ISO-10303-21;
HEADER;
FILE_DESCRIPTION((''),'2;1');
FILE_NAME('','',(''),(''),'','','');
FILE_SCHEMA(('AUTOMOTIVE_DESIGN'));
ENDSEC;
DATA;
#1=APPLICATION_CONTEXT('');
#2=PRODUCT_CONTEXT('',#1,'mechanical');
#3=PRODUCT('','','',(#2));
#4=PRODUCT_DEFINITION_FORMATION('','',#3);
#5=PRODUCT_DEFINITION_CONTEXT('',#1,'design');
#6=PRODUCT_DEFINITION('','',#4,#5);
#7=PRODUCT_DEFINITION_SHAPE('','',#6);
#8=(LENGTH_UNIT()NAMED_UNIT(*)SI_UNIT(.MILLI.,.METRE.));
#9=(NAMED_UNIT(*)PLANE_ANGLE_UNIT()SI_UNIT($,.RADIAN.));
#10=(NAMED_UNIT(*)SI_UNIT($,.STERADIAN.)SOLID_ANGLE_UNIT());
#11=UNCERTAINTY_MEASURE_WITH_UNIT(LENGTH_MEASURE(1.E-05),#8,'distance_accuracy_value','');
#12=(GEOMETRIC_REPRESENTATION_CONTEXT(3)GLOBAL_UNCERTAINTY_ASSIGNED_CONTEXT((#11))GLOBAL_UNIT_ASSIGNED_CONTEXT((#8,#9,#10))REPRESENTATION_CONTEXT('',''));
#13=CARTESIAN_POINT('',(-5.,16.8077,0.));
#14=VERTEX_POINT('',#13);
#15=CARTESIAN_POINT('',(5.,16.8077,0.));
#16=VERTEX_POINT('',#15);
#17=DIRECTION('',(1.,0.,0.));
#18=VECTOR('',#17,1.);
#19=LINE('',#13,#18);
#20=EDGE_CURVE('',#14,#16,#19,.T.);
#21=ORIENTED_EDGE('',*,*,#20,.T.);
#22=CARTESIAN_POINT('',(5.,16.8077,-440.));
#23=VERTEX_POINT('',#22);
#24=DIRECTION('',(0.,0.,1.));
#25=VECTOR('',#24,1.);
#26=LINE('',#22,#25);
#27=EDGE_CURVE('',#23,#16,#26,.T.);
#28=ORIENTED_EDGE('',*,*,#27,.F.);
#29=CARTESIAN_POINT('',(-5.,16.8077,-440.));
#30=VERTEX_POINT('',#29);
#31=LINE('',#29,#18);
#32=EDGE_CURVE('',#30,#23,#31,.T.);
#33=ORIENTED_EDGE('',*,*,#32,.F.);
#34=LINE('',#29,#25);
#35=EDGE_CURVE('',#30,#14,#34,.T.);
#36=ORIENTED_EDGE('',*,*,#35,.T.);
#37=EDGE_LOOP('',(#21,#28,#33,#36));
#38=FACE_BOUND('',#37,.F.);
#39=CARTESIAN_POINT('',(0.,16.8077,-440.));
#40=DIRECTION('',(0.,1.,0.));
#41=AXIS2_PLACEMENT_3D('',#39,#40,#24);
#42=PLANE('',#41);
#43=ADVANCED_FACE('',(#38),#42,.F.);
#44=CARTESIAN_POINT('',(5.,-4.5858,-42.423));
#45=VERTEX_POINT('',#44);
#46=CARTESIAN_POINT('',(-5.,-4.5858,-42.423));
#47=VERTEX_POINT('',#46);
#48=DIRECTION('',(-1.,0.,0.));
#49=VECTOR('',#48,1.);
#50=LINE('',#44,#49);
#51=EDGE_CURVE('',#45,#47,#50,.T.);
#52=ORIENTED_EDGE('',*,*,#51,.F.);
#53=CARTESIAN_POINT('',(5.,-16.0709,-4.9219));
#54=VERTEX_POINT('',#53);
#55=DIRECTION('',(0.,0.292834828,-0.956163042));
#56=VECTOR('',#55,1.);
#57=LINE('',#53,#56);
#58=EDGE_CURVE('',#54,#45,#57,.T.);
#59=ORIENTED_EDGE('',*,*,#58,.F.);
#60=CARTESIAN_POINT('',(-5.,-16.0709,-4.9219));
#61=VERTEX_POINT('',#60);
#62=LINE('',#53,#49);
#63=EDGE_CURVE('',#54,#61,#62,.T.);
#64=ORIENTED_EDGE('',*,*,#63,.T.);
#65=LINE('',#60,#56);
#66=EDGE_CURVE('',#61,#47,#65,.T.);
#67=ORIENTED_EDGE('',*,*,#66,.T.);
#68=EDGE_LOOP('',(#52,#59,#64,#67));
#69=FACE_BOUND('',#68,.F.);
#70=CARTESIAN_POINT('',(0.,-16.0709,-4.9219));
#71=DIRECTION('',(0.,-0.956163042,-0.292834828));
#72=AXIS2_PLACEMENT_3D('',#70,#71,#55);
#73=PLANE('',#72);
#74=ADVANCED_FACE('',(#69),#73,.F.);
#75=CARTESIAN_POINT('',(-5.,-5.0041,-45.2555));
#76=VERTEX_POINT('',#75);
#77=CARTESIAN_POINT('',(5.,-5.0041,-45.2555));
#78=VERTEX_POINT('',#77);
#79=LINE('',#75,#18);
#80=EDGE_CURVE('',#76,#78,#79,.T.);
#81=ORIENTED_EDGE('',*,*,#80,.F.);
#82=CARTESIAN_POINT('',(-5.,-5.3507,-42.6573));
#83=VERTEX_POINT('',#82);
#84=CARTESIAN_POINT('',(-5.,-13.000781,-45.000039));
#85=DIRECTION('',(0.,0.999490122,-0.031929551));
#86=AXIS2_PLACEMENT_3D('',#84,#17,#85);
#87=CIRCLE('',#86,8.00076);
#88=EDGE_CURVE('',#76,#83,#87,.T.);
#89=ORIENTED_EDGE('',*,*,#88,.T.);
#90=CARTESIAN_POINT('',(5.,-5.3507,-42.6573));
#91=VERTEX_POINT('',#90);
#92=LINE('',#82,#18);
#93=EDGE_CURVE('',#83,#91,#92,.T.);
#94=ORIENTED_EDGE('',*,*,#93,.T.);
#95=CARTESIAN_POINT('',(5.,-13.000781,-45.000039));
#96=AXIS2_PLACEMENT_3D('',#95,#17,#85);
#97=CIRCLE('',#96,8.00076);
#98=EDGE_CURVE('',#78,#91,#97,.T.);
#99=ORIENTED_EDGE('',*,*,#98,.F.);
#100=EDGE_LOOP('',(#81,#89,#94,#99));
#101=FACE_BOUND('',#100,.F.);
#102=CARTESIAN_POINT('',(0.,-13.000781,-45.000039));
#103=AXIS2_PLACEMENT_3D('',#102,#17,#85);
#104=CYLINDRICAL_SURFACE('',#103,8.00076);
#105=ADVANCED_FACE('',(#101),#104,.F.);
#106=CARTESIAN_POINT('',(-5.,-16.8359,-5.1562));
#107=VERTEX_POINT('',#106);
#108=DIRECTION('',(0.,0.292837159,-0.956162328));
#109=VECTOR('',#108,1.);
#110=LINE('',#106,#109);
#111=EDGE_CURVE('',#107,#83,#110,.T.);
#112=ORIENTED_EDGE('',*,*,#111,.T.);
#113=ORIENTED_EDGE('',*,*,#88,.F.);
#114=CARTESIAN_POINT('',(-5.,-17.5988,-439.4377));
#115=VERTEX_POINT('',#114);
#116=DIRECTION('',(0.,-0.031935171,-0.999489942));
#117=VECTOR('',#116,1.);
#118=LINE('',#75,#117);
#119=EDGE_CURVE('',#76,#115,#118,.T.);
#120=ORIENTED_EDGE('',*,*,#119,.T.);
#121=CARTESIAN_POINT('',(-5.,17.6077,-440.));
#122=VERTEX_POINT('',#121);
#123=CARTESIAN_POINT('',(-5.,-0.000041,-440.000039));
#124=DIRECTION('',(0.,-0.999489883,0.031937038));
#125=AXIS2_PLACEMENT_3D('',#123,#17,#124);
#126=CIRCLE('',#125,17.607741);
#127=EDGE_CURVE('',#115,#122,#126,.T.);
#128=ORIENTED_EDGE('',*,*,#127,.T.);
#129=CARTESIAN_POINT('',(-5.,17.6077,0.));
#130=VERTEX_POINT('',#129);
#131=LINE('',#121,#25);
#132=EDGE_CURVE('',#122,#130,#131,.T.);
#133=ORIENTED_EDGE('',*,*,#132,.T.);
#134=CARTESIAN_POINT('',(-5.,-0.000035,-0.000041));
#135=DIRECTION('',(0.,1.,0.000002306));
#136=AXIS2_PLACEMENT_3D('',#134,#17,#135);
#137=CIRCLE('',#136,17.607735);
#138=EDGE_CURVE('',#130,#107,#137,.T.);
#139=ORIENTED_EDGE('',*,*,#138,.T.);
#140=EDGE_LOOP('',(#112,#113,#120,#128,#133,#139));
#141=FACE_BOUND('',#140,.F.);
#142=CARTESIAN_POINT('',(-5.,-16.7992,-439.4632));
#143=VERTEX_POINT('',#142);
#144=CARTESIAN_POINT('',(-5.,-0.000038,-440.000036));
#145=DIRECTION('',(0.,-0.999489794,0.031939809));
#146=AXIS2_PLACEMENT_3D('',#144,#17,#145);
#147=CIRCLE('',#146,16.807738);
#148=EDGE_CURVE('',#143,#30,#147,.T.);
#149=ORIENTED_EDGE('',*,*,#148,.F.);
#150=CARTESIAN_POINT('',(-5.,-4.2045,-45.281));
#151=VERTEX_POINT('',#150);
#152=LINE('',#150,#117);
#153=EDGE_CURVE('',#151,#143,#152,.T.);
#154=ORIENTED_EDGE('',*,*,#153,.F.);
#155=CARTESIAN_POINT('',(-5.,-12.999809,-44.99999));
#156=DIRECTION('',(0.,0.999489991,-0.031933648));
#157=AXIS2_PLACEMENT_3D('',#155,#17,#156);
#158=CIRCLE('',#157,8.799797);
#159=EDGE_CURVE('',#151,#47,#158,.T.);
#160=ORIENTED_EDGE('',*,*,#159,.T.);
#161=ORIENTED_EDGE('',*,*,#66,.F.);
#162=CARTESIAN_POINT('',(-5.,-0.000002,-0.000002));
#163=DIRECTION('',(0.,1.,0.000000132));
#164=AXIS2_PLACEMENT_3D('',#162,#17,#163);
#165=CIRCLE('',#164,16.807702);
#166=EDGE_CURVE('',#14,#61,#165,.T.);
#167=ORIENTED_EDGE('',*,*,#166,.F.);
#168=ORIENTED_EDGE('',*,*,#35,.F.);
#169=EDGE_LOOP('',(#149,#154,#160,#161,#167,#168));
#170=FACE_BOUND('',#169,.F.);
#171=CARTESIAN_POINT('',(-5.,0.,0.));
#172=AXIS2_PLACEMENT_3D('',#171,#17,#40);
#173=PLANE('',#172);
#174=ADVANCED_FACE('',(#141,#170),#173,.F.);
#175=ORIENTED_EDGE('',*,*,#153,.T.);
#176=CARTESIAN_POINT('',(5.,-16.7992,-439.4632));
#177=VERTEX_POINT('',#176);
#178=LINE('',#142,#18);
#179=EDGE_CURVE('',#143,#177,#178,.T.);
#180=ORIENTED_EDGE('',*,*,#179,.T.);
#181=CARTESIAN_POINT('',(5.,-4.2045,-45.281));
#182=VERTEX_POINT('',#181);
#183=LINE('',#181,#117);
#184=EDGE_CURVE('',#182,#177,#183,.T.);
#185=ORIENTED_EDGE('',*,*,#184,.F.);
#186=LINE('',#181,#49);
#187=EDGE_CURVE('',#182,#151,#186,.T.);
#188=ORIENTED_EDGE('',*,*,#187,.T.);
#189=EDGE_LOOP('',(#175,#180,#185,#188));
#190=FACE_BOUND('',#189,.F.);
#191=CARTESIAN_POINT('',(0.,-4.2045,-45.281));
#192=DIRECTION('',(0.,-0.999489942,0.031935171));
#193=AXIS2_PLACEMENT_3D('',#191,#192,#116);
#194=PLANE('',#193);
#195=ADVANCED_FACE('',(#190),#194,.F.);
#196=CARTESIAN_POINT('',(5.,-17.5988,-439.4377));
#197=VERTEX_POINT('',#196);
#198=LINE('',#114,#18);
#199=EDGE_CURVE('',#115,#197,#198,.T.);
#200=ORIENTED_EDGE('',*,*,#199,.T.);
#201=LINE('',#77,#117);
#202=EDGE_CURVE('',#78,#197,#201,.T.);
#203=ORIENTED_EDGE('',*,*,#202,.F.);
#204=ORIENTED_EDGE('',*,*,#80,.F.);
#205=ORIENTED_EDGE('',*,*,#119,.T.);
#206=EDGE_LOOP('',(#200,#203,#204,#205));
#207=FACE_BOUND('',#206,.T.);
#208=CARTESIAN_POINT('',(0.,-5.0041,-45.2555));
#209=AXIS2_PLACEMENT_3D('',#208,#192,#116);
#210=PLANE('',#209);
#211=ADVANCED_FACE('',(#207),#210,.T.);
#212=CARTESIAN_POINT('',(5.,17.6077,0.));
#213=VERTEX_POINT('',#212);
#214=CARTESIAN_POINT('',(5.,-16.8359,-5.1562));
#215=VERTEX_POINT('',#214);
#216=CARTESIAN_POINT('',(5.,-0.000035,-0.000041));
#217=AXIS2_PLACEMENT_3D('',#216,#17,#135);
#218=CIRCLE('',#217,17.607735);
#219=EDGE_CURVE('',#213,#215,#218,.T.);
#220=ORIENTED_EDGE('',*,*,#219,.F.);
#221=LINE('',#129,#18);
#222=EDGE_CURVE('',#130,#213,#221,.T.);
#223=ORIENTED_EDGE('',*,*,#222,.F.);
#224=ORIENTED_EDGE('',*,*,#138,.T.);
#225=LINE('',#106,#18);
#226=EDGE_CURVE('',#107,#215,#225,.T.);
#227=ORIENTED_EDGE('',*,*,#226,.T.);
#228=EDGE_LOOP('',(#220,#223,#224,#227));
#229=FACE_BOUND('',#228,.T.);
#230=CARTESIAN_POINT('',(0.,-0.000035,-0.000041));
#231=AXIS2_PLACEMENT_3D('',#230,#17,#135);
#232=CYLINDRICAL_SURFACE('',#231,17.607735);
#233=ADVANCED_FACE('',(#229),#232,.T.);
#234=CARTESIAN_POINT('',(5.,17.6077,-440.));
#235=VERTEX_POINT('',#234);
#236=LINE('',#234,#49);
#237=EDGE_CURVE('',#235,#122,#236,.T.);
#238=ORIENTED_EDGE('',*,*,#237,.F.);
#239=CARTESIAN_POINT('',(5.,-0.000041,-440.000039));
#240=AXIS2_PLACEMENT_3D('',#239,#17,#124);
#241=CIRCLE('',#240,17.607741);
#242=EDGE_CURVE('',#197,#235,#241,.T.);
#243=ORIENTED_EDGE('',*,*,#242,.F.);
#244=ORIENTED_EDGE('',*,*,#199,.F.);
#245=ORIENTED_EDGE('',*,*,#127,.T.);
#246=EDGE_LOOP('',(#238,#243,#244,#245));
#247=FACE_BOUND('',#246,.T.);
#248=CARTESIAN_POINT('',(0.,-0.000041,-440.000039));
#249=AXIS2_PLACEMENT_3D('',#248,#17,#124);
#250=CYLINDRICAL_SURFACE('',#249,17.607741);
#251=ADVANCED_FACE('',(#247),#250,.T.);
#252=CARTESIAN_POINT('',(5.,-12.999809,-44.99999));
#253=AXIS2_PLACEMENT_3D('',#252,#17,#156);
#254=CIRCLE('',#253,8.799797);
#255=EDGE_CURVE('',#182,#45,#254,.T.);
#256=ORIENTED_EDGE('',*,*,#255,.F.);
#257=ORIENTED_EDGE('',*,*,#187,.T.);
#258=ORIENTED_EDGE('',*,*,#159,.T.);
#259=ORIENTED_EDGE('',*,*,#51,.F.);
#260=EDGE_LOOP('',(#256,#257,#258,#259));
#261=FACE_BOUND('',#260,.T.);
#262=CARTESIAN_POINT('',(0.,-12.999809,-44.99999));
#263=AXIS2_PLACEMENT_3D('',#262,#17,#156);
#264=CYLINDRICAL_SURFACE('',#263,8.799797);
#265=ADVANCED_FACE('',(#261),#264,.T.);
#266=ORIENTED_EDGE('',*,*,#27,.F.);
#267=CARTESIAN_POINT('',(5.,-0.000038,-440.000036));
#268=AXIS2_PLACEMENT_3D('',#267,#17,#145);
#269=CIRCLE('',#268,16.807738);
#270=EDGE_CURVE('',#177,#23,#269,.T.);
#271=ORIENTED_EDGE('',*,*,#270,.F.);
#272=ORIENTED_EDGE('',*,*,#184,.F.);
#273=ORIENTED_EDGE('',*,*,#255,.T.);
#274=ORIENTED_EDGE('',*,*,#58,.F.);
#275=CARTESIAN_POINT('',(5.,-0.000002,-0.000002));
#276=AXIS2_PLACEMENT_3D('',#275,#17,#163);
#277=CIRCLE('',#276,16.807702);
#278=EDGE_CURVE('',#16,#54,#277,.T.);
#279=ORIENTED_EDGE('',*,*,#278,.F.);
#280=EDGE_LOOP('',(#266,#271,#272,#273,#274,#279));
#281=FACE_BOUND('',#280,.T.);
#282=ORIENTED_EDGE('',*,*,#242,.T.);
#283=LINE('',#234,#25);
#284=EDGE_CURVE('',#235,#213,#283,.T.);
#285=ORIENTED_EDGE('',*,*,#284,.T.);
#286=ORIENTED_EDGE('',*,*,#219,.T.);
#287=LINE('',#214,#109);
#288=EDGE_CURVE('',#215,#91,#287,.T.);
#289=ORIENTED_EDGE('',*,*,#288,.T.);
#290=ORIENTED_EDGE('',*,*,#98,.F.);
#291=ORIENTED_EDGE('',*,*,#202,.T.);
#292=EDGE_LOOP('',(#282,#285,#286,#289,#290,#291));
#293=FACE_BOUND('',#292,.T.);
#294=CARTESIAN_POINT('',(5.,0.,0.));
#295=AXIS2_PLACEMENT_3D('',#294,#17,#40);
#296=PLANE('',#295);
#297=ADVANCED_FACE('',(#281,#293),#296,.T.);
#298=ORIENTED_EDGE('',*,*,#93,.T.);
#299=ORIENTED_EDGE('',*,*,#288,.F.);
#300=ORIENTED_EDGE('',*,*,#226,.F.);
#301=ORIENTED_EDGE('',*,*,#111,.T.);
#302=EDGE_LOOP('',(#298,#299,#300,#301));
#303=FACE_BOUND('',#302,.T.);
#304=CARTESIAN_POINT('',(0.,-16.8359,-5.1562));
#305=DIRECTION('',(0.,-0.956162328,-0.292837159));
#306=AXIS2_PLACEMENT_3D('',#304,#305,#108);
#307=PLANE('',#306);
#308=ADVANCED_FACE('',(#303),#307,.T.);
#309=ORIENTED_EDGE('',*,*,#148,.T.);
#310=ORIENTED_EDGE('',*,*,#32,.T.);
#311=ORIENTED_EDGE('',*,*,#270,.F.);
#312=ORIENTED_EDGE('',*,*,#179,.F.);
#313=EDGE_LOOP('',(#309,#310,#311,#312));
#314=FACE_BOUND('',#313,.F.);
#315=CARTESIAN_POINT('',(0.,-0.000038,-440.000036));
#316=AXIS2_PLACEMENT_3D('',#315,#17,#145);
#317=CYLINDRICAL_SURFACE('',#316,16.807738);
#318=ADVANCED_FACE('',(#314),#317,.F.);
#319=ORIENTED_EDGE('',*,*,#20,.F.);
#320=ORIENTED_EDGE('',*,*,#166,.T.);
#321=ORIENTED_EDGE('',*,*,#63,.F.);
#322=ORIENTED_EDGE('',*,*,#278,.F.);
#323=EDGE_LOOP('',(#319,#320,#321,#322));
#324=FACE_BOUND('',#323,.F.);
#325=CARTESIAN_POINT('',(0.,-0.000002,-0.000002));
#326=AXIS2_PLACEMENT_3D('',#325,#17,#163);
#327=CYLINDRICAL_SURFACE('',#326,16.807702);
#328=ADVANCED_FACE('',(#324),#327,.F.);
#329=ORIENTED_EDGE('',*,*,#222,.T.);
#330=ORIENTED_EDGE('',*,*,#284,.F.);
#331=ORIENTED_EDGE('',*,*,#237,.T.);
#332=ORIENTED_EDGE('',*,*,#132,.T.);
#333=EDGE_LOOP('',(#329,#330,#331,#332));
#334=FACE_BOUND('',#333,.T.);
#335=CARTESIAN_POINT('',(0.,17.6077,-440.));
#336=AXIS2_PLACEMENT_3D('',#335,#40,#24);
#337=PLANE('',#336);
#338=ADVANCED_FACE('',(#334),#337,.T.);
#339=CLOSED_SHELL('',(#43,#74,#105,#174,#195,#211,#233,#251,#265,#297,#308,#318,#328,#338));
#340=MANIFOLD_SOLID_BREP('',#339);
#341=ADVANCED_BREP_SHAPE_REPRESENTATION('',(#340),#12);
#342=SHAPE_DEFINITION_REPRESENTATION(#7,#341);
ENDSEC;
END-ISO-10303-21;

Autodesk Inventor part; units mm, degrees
ref_plane "YZ Plane" through (0, 0, 0) normal (1, 0, 0) x (0, 1, 0)
ref_plane "XZ Plane" through (0, 0, 0) normal (0, 1, 0) x (-1, 0, 0)
ref_plane "XY Plane" through (0, 0, 0) normal (0, 0, 1) x (1, 0, 0)
sketch "スケッチ1" plane through (0, 0, 0) normal (1, 0, 0) x (0, 1, 0)
  arc A0 (17.1887, 0) -> (-16.4352, -5.0335) centre (0, 0) ccw
  arc A1 (-17.18, -439.4511) -> (17.1887, -440) centre (0, -440) ccw
  arc A2 (-4.5853, -45.2689) -> (-4.9501, -42.5346) centre (-13, -45) ccw
  line L0 (-4.9501, -42.5346) -> (-16.4352, -5.0335)
  line L1 (17.1887, -440) -> (17.1887, 0)
  line L2 (-4.5853, -45.2689) -> (-17.18, -439.4511)
  arc A3 (17.6077, 0) -> (-16.8359, -5.1562) centre (0, 0) ccw
  line L3 (-16.8359, -5.1562) -> (-5.3507, -42.6573)
  arc A4 (-5.0041, -45.2555) -> (-5.3507, -42.6573) centre (-13, -45) ccw
  line L4 (-5.0041, -45.2555) -> (-17.5988, -439.4377)
  arc A5 (-17.5988, -439.4377) -> (17.6077, -440) centre (0, -440) ccw
  line L5 (17.6077, -440) -> (17.6077, 0)
  arc A6 (16.8077, 0) -> (-16.0709, -4.9219) centre (0, 0) ccw
  line L6 (-16.0709, -4.9219) -> (-4.5858, -42.423)
  arc A7 (-4.2045, -45.281) -> (-4.5858, -42.423) centre (-13, -45) ccw
  line L7 (-4.2045, -45.281) -> (-16.7992, -439.4632)
  arc A8 (-16.7992, -439.4632) -> (16.8077, -440) centre (0, -440) ccw
  line L8 (16.8077, -440) -> (16.8077, 0)
  dimension "d0" = 34.3775
  dimension "d1" = 34.3775
  dimension "d2" = 440
  dimension "d24" = 0.419
  dimension "d25" = 8
  dimension "d26" = 45
  dimension "d27" = 0.8
  dimension "d29" = 13
extrude "押し出し1" add sketch "スケッチ1" along normal mid plane 10 contours L1 A1 L2 A2 L0 A0 | L5 A5 L4 A4 L3 A3
properties part number "belt_3" material "ゴム"
